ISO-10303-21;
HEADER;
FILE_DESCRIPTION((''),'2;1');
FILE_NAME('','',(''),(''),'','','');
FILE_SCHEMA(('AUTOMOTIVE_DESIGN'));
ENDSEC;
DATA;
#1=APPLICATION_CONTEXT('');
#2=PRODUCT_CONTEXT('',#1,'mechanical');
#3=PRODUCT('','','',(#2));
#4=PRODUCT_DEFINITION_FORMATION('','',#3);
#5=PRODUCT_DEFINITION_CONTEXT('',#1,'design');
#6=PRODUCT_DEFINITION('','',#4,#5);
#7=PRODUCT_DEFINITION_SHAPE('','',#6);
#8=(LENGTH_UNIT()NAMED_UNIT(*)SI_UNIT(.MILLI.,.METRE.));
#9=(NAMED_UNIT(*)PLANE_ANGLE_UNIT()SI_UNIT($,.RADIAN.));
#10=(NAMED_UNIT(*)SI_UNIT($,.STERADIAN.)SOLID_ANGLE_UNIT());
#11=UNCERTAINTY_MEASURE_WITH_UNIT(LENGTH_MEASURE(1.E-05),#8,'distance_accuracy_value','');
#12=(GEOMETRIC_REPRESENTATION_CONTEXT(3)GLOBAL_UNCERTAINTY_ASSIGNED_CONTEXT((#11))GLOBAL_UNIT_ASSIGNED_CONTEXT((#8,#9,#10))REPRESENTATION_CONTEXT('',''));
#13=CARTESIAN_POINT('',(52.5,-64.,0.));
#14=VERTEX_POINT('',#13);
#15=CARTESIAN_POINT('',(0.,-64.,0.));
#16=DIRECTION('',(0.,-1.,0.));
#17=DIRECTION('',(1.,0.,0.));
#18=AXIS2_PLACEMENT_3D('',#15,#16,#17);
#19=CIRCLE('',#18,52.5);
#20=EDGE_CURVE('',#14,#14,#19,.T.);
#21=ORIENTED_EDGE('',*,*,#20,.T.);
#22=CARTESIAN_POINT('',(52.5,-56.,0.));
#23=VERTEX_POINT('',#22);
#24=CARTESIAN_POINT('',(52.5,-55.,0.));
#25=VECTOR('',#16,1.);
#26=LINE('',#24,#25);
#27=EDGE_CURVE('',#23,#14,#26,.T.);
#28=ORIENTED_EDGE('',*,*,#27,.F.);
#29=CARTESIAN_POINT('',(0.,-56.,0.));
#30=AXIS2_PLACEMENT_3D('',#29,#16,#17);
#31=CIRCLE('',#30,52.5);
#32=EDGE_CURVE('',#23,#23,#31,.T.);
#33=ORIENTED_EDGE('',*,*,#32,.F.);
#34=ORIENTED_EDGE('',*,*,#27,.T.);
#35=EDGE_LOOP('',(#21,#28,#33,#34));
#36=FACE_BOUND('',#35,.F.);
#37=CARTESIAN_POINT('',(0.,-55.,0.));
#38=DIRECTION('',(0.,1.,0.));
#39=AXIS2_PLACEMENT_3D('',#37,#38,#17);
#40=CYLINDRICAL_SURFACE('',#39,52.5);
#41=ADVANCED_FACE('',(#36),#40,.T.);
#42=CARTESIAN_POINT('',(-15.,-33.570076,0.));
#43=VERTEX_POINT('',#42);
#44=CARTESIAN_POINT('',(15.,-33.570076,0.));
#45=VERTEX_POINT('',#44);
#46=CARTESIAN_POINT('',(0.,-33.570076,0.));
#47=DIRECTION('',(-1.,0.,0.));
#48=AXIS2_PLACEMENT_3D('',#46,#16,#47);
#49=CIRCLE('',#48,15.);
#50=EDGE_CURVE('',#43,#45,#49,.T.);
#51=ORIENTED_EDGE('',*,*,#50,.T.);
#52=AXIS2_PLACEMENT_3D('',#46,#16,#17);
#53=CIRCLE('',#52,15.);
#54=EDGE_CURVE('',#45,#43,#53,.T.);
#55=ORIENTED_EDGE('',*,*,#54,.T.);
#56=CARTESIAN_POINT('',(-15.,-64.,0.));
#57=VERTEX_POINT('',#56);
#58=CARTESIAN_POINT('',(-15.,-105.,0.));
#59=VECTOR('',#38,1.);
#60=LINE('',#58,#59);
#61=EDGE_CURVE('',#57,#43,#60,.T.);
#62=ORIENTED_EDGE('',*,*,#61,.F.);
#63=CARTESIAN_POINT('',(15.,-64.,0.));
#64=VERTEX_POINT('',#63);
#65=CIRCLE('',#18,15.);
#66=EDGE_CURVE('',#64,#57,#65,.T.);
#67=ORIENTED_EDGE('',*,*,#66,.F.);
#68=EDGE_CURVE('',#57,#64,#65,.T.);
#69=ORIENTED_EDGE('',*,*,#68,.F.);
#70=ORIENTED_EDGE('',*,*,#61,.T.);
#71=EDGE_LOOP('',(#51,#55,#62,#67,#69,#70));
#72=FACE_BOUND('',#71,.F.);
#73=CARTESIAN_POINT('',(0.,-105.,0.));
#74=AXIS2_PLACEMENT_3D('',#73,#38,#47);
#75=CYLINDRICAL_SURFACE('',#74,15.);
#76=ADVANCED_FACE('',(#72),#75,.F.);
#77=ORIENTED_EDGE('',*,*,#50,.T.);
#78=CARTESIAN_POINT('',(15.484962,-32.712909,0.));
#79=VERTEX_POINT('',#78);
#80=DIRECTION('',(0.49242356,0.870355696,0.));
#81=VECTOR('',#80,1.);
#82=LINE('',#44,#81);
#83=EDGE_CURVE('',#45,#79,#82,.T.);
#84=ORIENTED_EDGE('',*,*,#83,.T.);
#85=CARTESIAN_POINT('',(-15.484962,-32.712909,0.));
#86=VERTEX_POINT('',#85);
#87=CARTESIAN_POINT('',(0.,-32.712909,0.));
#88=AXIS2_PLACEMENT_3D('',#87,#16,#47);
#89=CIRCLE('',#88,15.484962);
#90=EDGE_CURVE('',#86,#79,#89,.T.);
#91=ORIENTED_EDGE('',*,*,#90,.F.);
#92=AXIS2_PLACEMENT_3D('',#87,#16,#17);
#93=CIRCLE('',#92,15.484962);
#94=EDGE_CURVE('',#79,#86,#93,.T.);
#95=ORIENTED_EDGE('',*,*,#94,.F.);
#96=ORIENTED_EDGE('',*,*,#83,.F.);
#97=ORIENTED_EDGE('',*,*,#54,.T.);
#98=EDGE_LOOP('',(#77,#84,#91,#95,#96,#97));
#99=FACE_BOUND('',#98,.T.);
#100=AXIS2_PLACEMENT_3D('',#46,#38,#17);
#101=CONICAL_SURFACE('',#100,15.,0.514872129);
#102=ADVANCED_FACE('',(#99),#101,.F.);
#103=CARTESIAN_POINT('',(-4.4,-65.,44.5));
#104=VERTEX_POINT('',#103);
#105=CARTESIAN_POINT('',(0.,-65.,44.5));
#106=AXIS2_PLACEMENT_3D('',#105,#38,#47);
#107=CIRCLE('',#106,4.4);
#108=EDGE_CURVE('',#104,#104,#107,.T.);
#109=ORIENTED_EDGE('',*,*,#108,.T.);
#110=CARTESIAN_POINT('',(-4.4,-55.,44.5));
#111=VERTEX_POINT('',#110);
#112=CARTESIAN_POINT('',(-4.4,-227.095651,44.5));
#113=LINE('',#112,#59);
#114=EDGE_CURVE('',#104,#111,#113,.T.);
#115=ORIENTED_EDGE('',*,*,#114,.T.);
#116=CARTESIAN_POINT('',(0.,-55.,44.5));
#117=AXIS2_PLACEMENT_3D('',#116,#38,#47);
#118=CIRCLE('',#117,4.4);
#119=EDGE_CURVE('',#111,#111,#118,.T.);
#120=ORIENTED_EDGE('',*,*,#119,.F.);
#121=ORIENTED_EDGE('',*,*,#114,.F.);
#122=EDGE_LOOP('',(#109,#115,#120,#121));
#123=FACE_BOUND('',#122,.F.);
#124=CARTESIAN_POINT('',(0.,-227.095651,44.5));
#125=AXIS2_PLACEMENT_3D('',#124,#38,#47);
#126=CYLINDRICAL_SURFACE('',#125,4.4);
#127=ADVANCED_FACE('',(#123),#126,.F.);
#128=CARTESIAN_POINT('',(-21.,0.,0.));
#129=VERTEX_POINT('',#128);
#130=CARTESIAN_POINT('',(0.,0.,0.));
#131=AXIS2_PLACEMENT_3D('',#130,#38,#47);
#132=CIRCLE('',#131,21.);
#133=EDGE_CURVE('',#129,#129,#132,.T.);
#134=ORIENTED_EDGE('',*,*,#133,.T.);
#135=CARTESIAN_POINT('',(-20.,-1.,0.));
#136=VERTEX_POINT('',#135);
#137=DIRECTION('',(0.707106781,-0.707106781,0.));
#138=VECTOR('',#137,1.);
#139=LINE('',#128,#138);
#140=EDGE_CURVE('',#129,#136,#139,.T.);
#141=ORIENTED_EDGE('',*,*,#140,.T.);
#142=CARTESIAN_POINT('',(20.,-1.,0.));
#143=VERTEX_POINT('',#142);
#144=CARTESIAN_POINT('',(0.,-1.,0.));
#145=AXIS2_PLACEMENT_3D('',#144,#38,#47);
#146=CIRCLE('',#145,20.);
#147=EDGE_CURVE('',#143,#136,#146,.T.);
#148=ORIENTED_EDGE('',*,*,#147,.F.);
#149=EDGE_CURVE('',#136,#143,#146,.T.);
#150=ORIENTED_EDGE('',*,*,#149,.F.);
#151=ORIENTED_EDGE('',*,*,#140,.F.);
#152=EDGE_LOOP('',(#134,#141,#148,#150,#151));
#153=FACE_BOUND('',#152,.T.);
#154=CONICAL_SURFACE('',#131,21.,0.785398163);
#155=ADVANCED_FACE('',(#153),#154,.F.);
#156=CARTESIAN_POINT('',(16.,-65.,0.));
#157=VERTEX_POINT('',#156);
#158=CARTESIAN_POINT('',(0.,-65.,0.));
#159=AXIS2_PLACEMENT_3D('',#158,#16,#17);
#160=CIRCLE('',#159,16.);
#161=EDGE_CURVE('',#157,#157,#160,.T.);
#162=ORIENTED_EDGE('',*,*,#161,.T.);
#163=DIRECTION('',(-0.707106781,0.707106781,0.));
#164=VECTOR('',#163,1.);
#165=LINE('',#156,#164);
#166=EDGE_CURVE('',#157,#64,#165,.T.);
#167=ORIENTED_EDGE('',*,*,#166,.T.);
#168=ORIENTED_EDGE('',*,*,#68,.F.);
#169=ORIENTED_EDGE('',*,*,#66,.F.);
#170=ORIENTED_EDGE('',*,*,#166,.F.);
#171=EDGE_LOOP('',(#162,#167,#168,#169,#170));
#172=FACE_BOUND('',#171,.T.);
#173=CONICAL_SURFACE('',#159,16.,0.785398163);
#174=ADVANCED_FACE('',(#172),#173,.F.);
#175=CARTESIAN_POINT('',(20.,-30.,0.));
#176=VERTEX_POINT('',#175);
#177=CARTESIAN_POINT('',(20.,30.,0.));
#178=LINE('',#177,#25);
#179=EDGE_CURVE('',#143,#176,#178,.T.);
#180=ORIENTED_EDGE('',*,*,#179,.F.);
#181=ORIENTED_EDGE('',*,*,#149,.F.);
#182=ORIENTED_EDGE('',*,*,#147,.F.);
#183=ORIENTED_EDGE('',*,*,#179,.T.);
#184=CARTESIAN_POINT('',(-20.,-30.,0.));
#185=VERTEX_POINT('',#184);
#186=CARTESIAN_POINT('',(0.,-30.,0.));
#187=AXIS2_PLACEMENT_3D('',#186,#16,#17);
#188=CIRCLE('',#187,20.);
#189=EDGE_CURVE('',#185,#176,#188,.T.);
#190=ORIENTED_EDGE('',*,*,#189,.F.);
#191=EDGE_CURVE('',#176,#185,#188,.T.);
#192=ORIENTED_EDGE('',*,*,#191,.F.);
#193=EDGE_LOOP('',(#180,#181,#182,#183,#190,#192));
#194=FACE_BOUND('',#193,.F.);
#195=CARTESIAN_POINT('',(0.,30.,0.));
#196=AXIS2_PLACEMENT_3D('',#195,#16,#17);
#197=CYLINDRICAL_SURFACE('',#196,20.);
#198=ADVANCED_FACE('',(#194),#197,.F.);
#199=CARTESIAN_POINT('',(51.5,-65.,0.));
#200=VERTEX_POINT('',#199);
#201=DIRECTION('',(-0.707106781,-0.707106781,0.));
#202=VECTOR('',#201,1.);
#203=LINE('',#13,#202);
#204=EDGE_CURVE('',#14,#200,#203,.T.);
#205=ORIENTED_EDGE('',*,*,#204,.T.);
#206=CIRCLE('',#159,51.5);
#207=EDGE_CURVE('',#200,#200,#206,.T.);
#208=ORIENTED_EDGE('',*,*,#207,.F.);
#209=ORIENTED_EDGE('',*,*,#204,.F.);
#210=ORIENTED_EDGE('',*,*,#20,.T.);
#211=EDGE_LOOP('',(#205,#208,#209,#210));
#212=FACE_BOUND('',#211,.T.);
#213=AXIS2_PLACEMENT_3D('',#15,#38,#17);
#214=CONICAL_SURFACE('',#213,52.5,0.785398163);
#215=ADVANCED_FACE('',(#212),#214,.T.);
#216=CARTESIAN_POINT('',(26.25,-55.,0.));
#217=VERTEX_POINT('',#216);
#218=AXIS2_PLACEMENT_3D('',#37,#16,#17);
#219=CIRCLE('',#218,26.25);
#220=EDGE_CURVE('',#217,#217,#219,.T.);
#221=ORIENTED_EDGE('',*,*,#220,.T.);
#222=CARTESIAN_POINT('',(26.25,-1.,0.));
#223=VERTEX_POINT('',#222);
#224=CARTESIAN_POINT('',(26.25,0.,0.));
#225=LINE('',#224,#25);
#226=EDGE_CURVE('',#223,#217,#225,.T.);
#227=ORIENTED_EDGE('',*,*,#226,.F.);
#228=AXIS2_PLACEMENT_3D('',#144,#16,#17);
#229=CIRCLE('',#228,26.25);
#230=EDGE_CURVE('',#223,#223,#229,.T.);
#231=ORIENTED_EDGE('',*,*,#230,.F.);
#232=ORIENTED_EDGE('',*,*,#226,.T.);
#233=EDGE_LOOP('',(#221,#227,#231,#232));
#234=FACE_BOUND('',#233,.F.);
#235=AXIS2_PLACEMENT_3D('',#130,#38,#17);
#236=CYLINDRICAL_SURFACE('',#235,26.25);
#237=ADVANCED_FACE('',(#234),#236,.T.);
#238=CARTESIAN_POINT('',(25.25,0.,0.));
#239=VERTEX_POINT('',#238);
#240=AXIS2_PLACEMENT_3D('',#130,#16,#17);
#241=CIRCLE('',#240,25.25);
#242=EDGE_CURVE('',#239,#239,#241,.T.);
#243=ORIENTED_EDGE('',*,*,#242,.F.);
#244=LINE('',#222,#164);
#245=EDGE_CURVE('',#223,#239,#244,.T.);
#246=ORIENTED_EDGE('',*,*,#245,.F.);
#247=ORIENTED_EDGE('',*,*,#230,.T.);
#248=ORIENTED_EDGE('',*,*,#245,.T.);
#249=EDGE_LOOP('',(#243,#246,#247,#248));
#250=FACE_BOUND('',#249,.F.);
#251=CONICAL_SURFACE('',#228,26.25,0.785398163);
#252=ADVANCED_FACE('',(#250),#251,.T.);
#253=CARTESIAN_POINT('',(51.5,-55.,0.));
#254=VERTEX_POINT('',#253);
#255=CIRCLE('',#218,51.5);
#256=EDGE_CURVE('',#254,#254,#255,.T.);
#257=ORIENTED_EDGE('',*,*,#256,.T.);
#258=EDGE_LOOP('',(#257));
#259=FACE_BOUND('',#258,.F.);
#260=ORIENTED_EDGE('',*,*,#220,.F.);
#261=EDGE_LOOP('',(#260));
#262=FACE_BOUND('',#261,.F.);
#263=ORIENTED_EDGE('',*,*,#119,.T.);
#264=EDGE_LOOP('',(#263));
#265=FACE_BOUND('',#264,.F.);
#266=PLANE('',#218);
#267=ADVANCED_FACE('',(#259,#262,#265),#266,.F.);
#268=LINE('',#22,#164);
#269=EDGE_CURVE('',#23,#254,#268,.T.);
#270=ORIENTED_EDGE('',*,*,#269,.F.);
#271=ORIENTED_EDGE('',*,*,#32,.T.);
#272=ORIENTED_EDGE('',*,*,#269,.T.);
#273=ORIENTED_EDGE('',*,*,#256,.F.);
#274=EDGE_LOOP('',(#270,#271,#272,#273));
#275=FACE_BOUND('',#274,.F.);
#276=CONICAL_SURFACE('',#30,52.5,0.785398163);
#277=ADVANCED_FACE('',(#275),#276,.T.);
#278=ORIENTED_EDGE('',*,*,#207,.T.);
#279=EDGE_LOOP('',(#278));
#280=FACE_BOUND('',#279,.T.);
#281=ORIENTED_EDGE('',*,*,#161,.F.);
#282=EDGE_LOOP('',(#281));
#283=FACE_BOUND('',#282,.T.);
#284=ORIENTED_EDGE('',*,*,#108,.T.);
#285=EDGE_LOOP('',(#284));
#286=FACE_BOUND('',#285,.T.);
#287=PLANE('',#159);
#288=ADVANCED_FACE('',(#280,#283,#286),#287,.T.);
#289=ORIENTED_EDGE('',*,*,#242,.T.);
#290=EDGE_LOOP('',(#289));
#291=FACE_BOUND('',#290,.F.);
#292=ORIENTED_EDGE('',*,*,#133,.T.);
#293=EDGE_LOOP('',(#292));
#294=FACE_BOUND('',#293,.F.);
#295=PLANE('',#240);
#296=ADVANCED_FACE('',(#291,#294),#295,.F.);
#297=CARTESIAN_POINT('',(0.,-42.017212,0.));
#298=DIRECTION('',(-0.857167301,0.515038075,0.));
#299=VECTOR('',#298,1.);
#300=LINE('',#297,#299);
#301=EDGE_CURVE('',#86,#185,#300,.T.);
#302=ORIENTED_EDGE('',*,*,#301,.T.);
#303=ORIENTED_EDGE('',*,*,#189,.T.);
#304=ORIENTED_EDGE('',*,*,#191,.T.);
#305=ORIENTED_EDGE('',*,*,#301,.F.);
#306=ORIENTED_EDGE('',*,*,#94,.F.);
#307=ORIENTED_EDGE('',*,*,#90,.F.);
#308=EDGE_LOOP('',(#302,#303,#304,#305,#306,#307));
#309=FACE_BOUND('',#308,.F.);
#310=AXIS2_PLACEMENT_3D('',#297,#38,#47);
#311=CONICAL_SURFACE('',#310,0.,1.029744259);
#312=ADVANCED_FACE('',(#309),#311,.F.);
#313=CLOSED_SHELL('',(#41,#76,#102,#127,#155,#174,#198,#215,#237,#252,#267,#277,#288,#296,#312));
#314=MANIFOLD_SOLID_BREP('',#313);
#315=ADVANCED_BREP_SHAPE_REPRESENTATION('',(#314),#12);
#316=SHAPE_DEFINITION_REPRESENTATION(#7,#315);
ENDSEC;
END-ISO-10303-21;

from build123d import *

# Parameters (mm, degrees)
F0_R         = 26.25
F1_DEPTH     = 55
F2_R         = 52.5
F2_R_2       = 26.25
F3_DEPTH     = 10
F6_D         = 30
F6_DEPTH     = 40
F6_TIP       = 9.0129092854
F7_D         = 40
F7_DEPTH     = 30
F7_TIP       = 12.0172123806
F8_T10_ANGLE = 180
F8_T12_ANGLE = 180
F10_D        = 8.8


# Not quite as in the source:
# - a fillet or chamfer that OpenCascade refuses, or shapes differently, is made with other operations: its cross-section is extruded or revolved along the edge and cut away or added


with BuildPart() as f1:
    # F0 (on Front) → F1 (new body)
    with BuildSketch(Plane.XZ):
        Circle(F0_R)
    extrude(amount=F1_DEPTH)

    # F2 (on face) → F3 (join)
    with BuildSketch(Plane.XZ.offset(55)):
        Circle(F2_R)
        Circle(F2_R_2, mode=Mode.SUBTRACT)
        Circle(F2_R_2)
    extrude(amount=F3_DEPTH)

    # F6
    with Locations(Plane.XZ.offset(65)):
        with Locations((0, 0)):
            Hole(F6_D / 2, depth=F6_DEPTH)
            with Locations((0, 0, -(F6_DEPTH + F6_TIP / 2))):  # 118° drill point
                Cone(0, F6_D / 2, F6_TIP, mode=Mode.SUBTRACT)

    # F7
    with Locations(Plane(origin=(0, 0, 0), x_dir=(-1, 0, 0), z_dir=(0, 1, 0))):
        with Locations((0, 0)):
            Hole(F7_D / 2, depth=F7_DEPTH)
            with Locations((0, 0, -(F7_DEPTH + F7_TIP / 2))):  # 118° drill point
                Cone(0, F7_D / 2, F7_TIP, mode=Mode.SUBTRACT)

    # F8: chamfer of 1 on 7 edges, made by hand

    # F8_s1 → F8_t2 (revolve, cut)
    with BuildSketch(Plane.XY):
        Polygon((52.5, -56), (51.5, -55), (52.5, -55), align=None)
    revolve(axis=Axis((0, -55, 0), (0, -1, 0)), mode=Mode.SUBTRACT)

    # F8_s3 → F8_t4 (revolve, cut)
    with BuildSketch(Plane.XY):
        Polygon((26.25, -1), (25.25, 0), (26.25, 0), align=None)
    revolve(axis=Axis((0, 0, 0), (0, -1, 0)), mode=Mode.SUBTRACT)

    # F8_s5 → F8_t6 (revolve, cut)
    with BuildSketch(Plane.XY):
        Polygon((52.5, -64), (51.5, -65), (52.5, -65), align=None)
    revolve(axis=Axis((0, -65, 0), (0, -1, 0)), mode=Mode.SUBTRACT)

    # F8_s7 → F8_t8 (revolve, cut)
    with BuildSketch(Plane.XY):
        Polygon((16, -65), (15, -64), (15, -65), align=None)
    revolve(axis=Axis((0, -65, 0), (0, -1, 0)), mode=Mode.SUBTRACT)

    # F8_s9 → F8_t10 (revolve, cut)
    with BuildSketch(Plane.XY):
        Polygon((-15, -33.5700758733), (-15.4849619251, -32.7129085726), (-15, -33.0043030951), align=None)
    revolve(axis=Axis((0, -33.0043030951, 0), (0, -1, 0)), revolution_arc=F8_T10_ANGLE, mode=Mode.SUBTRACT)

    # F8_s11 → F8_t12 (revolve, cut)
    with BuildSketch(Plane.XY):
        Polygon((15, -33.5700758733), (15.4849619251, -32.7129085726), (15, -33.0043030951), align=None)
    revolve(axis=Axis((0, -33.0043030951, 0), (0, -1, 0)), revolution_arc=F8_T12_ANGLE, mode=Mode.SUBTRACT)

    # F8_s13 → F8_t14 (revolve, cut)
    with BuildSketch(Plane.XY):
        Polygon((-21, 0), (-20, -1), (-20, 0), align=None)
    revolve(axis=Axis((0, 0, 0), (0, 1, 0)), mode=Mode.SUBTRACT)

    # F10 (through all)
    with Locations(Plane.XZ.offset(65)):
        with Locations((0, 44.5)):
            Hole(F10_D / 2)


solid = f1.part
